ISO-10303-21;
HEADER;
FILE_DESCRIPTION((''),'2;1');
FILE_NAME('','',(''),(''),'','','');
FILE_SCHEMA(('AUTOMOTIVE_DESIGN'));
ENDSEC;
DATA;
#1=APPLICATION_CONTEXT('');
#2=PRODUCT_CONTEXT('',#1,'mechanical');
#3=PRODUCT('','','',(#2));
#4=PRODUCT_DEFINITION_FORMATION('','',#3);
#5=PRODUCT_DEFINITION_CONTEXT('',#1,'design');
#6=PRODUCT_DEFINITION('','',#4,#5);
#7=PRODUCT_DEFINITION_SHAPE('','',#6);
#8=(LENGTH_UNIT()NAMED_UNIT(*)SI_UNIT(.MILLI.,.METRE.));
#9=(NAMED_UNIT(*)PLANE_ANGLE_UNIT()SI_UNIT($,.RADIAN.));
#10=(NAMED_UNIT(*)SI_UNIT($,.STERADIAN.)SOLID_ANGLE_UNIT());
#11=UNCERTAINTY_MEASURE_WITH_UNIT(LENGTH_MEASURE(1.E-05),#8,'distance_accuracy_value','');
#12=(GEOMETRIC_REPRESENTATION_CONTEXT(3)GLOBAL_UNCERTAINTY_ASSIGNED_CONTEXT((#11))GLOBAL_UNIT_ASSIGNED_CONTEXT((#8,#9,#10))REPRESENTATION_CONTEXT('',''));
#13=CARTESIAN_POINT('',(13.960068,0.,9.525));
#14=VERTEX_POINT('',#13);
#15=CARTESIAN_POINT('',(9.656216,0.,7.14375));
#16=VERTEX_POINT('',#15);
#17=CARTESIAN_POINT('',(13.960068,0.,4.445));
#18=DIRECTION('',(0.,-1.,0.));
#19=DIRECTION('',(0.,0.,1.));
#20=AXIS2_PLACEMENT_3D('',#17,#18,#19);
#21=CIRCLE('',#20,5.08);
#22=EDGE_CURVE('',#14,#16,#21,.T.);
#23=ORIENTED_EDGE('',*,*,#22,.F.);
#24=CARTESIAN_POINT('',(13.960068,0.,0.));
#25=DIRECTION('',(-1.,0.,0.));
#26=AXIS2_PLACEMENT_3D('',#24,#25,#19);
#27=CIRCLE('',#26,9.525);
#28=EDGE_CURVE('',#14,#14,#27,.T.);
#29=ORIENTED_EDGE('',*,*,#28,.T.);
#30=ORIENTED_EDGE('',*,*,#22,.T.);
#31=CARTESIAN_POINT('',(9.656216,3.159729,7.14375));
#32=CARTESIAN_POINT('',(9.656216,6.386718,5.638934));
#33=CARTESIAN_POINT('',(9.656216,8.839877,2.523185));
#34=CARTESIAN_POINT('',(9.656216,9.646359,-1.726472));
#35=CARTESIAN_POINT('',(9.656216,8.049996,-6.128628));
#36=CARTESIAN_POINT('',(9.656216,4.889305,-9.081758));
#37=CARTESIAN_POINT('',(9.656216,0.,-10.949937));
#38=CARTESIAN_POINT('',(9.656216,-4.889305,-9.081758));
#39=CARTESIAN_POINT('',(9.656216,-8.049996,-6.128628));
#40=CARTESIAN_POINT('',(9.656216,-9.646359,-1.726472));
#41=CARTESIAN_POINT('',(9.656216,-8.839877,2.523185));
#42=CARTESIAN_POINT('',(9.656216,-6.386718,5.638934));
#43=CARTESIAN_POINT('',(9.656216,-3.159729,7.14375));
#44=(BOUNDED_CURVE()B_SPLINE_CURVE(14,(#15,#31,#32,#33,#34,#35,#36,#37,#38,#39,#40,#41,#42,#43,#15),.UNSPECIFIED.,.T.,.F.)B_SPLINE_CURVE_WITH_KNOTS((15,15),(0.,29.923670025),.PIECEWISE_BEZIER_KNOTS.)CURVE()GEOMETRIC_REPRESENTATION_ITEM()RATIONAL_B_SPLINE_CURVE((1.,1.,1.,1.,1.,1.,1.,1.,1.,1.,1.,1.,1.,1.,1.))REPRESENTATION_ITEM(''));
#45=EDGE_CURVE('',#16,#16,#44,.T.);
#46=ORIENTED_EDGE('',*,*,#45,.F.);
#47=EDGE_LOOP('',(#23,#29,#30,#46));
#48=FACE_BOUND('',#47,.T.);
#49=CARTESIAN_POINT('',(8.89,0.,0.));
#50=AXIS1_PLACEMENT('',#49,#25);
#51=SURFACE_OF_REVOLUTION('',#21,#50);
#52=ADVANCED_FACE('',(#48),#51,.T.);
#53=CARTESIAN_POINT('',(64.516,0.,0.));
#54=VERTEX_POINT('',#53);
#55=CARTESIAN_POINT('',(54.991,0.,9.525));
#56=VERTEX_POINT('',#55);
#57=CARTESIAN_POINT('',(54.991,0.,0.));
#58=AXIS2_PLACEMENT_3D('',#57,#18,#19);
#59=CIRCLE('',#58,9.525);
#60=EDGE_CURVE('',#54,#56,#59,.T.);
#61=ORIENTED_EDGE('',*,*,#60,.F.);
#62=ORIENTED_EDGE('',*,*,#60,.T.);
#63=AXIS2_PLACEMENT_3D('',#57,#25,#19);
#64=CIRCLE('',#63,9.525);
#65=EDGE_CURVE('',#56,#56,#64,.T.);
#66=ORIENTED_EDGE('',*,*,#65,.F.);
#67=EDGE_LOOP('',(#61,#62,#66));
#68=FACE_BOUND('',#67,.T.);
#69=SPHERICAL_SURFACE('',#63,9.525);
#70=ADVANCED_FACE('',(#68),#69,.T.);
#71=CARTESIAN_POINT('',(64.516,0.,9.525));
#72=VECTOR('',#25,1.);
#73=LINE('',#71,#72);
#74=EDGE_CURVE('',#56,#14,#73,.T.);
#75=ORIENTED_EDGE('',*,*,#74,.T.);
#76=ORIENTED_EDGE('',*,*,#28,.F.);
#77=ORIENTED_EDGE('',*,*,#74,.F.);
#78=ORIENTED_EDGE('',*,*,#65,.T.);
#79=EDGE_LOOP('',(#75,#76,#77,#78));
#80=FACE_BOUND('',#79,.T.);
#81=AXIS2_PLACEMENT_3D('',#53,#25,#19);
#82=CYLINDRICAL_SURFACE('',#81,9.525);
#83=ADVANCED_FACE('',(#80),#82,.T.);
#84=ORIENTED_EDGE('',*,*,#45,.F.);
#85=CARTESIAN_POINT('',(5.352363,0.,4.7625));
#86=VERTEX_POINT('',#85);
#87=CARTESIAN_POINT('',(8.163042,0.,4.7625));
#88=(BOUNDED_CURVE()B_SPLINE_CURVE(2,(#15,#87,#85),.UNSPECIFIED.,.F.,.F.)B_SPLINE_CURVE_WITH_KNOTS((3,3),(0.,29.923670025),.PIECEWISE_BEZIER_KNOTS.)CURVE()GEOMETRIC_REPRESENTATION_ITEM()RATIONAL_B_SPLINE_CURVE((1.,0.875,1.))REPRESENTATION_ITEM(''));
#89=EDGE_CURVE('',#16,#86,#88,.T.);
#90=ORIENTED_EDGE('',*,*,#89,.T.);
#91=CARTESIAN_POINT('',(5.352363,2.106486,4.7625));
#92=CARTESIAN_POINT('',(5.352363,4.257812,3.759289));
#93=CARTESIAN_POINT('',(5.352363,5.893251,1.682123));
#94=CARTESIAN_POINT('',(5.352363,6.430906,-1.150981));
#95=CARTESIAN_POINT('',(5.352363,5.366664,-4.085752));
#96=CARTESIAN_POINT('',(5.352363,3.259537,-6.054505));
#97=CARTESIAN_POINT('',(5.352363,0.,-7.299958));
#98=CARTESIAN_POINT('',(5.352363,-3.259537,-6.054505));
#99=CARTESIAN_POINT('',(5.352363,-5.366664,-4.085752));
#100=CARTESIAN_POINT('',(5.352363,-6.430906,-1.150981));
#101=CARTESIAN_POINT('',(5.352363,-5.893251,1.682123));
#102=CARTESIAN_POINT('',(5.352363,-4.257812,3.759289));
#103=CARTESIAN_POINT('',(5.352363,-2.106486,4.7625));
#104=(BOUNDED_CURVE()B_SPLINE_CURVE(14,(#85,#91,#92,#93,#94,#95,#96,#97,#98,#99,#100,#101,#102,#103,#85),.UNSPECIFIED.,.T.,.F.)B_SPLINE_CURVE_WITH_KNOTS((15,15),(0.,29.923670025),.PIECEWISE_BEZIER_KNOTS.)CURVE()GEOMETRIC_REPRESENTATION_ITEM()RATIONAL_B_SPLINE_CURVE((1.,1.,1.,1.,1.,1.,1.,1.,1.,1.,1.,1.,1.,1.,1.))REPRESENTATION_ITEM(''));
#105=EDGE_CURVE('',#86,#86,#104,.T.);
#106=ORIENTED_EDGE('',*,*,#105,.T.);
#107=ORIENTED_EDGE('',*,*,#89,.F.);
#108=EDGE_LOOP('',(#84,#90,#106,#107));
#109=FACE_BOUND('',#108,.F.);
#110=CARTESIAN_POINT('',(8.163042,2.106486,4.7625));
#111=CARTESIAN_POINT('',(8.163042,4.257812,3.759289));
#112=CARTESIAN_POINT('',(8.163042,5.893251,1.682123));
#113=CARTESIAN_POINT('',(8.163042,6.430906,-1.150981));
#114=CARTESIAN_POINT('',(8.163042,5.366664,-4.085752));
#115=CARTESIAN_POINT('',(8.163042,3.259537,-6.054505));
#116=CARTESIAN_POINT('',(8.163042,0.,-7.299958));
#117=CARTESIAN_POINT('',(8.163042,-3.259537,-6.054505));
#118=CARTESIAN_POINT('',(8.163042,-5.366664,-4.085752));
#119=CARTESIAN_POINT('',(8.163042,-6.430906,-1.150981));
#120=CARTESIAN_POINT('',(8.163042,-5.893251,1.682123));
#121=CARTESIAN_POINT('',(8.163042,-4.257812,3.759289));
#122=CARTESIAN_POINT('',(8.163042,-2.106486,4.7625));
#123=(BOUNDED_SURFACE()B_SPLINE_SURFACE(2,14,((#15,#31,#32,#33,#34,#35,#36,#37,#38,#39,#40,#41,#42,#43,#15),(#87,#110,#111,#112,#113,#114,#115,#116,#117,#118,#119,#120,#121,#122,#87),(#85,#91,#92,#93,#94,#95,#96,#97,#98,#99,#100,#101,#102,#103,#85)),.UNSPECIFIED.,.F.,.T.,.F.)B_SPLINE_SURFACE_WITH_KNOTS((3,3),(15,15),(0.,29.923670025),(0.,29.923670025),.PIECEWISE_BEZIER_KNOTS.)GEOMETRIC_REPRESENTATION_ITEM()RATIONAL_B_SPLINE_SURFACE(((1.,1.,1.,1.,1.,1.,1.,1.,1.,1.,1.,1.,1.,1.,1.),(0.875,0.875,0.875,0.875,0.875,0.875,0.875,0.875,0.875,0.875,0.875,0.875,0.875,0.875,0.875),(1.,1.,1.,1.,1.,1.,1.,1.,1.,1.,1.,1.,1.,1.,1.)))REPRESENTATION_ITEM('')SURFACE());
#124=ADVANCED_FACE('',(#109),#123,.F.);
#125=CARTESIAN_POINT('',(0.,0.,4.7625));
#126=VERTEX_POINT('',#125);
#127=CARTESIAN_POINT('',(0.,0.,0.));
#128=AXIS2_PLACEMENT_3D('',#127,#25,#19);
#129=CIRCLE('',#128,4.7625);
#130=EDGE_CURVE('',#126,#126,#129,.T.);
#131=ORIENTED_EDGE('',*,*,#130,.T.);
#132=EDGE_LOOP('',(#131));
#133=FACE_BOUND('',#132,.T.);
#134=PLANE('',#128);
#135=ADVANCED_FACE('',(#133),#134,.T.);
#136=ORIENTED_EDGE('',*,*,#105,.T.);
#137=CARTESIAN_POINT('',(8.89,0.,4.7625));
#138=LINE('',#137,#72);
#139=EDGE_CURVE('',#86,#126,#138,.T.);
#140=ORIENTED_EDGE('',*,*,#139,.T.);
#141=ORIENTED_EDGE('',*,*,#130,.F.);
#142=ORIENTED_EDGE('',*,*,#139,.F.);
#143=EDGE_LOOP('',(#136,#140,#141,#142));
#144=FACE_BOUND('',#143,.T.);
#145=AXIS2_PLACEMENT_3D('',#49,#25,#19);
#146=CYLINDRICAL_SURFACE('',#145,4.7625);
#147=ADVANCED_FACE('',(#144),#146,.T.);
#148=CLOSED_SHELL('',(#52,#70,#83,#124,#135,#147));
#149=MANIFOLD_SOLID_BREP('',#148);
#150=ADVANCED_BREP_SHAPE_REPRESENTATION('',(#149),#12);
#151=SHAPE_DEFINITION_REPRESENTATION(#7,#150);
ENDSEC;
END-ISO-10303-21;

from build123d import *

# Parameters (mm, degrees)
F2_R = 9.525
F4_R = 5.08


# Not quite as in the source:
# - a fillet or chamfer that OpenCascade refuses, or shapes differently, is made with other operations: its cross-section is extruded or revolved along the edge and cut away or added


with BuildPart() as f1:
    # F0 (on Front) → F1 (revolve)
    with BuildSketch(Plane.XZ):
        Polygon((0, 4.7625), (0, 0), (64.516, 0), (64.516, 9.525), (8.89, 9.525), (8.89, 4.7625), align=None)
    revolve(axis=Axis((32.258, 0, 0), (-1, 0, 0)))

    # F2
    f2_edges = [f1.edges().sort_by_distance(p)[0] for p in [
        (64.516, 0, -9.525),
    ]]
    fillet(f2_edges, radius=F2_R)

    # F3: fillet of radius 5.08 on 1 edges, made by hand

    # F3_s1 → F3_t2 (revolve, cut)
    with BuildSketch(Plane.XZ):
        with BuildLine():
            ThreePointArc((13.9600684167, 9.525), (10.4820301765, 8.1476544532), (8.89, 4.7625))
            Line((8.89, 4.7625), (8.89, 9.525))
            Line((8.89, 9.525), (13.9600684167, 9.525))
        make_face()
    revolve(axis=Axis((8.89, 0, 0), (-1, 0, 0)), mode=Mode.SUBTRACT)

    # F4
    f4_edges = [f1.edges().sort_by_distance(p)[0] for p in [
        (8.89, 0, -4.7625),
    ]]
    fillet(f4_edges, radius=F4_R)


solid = f1.part
